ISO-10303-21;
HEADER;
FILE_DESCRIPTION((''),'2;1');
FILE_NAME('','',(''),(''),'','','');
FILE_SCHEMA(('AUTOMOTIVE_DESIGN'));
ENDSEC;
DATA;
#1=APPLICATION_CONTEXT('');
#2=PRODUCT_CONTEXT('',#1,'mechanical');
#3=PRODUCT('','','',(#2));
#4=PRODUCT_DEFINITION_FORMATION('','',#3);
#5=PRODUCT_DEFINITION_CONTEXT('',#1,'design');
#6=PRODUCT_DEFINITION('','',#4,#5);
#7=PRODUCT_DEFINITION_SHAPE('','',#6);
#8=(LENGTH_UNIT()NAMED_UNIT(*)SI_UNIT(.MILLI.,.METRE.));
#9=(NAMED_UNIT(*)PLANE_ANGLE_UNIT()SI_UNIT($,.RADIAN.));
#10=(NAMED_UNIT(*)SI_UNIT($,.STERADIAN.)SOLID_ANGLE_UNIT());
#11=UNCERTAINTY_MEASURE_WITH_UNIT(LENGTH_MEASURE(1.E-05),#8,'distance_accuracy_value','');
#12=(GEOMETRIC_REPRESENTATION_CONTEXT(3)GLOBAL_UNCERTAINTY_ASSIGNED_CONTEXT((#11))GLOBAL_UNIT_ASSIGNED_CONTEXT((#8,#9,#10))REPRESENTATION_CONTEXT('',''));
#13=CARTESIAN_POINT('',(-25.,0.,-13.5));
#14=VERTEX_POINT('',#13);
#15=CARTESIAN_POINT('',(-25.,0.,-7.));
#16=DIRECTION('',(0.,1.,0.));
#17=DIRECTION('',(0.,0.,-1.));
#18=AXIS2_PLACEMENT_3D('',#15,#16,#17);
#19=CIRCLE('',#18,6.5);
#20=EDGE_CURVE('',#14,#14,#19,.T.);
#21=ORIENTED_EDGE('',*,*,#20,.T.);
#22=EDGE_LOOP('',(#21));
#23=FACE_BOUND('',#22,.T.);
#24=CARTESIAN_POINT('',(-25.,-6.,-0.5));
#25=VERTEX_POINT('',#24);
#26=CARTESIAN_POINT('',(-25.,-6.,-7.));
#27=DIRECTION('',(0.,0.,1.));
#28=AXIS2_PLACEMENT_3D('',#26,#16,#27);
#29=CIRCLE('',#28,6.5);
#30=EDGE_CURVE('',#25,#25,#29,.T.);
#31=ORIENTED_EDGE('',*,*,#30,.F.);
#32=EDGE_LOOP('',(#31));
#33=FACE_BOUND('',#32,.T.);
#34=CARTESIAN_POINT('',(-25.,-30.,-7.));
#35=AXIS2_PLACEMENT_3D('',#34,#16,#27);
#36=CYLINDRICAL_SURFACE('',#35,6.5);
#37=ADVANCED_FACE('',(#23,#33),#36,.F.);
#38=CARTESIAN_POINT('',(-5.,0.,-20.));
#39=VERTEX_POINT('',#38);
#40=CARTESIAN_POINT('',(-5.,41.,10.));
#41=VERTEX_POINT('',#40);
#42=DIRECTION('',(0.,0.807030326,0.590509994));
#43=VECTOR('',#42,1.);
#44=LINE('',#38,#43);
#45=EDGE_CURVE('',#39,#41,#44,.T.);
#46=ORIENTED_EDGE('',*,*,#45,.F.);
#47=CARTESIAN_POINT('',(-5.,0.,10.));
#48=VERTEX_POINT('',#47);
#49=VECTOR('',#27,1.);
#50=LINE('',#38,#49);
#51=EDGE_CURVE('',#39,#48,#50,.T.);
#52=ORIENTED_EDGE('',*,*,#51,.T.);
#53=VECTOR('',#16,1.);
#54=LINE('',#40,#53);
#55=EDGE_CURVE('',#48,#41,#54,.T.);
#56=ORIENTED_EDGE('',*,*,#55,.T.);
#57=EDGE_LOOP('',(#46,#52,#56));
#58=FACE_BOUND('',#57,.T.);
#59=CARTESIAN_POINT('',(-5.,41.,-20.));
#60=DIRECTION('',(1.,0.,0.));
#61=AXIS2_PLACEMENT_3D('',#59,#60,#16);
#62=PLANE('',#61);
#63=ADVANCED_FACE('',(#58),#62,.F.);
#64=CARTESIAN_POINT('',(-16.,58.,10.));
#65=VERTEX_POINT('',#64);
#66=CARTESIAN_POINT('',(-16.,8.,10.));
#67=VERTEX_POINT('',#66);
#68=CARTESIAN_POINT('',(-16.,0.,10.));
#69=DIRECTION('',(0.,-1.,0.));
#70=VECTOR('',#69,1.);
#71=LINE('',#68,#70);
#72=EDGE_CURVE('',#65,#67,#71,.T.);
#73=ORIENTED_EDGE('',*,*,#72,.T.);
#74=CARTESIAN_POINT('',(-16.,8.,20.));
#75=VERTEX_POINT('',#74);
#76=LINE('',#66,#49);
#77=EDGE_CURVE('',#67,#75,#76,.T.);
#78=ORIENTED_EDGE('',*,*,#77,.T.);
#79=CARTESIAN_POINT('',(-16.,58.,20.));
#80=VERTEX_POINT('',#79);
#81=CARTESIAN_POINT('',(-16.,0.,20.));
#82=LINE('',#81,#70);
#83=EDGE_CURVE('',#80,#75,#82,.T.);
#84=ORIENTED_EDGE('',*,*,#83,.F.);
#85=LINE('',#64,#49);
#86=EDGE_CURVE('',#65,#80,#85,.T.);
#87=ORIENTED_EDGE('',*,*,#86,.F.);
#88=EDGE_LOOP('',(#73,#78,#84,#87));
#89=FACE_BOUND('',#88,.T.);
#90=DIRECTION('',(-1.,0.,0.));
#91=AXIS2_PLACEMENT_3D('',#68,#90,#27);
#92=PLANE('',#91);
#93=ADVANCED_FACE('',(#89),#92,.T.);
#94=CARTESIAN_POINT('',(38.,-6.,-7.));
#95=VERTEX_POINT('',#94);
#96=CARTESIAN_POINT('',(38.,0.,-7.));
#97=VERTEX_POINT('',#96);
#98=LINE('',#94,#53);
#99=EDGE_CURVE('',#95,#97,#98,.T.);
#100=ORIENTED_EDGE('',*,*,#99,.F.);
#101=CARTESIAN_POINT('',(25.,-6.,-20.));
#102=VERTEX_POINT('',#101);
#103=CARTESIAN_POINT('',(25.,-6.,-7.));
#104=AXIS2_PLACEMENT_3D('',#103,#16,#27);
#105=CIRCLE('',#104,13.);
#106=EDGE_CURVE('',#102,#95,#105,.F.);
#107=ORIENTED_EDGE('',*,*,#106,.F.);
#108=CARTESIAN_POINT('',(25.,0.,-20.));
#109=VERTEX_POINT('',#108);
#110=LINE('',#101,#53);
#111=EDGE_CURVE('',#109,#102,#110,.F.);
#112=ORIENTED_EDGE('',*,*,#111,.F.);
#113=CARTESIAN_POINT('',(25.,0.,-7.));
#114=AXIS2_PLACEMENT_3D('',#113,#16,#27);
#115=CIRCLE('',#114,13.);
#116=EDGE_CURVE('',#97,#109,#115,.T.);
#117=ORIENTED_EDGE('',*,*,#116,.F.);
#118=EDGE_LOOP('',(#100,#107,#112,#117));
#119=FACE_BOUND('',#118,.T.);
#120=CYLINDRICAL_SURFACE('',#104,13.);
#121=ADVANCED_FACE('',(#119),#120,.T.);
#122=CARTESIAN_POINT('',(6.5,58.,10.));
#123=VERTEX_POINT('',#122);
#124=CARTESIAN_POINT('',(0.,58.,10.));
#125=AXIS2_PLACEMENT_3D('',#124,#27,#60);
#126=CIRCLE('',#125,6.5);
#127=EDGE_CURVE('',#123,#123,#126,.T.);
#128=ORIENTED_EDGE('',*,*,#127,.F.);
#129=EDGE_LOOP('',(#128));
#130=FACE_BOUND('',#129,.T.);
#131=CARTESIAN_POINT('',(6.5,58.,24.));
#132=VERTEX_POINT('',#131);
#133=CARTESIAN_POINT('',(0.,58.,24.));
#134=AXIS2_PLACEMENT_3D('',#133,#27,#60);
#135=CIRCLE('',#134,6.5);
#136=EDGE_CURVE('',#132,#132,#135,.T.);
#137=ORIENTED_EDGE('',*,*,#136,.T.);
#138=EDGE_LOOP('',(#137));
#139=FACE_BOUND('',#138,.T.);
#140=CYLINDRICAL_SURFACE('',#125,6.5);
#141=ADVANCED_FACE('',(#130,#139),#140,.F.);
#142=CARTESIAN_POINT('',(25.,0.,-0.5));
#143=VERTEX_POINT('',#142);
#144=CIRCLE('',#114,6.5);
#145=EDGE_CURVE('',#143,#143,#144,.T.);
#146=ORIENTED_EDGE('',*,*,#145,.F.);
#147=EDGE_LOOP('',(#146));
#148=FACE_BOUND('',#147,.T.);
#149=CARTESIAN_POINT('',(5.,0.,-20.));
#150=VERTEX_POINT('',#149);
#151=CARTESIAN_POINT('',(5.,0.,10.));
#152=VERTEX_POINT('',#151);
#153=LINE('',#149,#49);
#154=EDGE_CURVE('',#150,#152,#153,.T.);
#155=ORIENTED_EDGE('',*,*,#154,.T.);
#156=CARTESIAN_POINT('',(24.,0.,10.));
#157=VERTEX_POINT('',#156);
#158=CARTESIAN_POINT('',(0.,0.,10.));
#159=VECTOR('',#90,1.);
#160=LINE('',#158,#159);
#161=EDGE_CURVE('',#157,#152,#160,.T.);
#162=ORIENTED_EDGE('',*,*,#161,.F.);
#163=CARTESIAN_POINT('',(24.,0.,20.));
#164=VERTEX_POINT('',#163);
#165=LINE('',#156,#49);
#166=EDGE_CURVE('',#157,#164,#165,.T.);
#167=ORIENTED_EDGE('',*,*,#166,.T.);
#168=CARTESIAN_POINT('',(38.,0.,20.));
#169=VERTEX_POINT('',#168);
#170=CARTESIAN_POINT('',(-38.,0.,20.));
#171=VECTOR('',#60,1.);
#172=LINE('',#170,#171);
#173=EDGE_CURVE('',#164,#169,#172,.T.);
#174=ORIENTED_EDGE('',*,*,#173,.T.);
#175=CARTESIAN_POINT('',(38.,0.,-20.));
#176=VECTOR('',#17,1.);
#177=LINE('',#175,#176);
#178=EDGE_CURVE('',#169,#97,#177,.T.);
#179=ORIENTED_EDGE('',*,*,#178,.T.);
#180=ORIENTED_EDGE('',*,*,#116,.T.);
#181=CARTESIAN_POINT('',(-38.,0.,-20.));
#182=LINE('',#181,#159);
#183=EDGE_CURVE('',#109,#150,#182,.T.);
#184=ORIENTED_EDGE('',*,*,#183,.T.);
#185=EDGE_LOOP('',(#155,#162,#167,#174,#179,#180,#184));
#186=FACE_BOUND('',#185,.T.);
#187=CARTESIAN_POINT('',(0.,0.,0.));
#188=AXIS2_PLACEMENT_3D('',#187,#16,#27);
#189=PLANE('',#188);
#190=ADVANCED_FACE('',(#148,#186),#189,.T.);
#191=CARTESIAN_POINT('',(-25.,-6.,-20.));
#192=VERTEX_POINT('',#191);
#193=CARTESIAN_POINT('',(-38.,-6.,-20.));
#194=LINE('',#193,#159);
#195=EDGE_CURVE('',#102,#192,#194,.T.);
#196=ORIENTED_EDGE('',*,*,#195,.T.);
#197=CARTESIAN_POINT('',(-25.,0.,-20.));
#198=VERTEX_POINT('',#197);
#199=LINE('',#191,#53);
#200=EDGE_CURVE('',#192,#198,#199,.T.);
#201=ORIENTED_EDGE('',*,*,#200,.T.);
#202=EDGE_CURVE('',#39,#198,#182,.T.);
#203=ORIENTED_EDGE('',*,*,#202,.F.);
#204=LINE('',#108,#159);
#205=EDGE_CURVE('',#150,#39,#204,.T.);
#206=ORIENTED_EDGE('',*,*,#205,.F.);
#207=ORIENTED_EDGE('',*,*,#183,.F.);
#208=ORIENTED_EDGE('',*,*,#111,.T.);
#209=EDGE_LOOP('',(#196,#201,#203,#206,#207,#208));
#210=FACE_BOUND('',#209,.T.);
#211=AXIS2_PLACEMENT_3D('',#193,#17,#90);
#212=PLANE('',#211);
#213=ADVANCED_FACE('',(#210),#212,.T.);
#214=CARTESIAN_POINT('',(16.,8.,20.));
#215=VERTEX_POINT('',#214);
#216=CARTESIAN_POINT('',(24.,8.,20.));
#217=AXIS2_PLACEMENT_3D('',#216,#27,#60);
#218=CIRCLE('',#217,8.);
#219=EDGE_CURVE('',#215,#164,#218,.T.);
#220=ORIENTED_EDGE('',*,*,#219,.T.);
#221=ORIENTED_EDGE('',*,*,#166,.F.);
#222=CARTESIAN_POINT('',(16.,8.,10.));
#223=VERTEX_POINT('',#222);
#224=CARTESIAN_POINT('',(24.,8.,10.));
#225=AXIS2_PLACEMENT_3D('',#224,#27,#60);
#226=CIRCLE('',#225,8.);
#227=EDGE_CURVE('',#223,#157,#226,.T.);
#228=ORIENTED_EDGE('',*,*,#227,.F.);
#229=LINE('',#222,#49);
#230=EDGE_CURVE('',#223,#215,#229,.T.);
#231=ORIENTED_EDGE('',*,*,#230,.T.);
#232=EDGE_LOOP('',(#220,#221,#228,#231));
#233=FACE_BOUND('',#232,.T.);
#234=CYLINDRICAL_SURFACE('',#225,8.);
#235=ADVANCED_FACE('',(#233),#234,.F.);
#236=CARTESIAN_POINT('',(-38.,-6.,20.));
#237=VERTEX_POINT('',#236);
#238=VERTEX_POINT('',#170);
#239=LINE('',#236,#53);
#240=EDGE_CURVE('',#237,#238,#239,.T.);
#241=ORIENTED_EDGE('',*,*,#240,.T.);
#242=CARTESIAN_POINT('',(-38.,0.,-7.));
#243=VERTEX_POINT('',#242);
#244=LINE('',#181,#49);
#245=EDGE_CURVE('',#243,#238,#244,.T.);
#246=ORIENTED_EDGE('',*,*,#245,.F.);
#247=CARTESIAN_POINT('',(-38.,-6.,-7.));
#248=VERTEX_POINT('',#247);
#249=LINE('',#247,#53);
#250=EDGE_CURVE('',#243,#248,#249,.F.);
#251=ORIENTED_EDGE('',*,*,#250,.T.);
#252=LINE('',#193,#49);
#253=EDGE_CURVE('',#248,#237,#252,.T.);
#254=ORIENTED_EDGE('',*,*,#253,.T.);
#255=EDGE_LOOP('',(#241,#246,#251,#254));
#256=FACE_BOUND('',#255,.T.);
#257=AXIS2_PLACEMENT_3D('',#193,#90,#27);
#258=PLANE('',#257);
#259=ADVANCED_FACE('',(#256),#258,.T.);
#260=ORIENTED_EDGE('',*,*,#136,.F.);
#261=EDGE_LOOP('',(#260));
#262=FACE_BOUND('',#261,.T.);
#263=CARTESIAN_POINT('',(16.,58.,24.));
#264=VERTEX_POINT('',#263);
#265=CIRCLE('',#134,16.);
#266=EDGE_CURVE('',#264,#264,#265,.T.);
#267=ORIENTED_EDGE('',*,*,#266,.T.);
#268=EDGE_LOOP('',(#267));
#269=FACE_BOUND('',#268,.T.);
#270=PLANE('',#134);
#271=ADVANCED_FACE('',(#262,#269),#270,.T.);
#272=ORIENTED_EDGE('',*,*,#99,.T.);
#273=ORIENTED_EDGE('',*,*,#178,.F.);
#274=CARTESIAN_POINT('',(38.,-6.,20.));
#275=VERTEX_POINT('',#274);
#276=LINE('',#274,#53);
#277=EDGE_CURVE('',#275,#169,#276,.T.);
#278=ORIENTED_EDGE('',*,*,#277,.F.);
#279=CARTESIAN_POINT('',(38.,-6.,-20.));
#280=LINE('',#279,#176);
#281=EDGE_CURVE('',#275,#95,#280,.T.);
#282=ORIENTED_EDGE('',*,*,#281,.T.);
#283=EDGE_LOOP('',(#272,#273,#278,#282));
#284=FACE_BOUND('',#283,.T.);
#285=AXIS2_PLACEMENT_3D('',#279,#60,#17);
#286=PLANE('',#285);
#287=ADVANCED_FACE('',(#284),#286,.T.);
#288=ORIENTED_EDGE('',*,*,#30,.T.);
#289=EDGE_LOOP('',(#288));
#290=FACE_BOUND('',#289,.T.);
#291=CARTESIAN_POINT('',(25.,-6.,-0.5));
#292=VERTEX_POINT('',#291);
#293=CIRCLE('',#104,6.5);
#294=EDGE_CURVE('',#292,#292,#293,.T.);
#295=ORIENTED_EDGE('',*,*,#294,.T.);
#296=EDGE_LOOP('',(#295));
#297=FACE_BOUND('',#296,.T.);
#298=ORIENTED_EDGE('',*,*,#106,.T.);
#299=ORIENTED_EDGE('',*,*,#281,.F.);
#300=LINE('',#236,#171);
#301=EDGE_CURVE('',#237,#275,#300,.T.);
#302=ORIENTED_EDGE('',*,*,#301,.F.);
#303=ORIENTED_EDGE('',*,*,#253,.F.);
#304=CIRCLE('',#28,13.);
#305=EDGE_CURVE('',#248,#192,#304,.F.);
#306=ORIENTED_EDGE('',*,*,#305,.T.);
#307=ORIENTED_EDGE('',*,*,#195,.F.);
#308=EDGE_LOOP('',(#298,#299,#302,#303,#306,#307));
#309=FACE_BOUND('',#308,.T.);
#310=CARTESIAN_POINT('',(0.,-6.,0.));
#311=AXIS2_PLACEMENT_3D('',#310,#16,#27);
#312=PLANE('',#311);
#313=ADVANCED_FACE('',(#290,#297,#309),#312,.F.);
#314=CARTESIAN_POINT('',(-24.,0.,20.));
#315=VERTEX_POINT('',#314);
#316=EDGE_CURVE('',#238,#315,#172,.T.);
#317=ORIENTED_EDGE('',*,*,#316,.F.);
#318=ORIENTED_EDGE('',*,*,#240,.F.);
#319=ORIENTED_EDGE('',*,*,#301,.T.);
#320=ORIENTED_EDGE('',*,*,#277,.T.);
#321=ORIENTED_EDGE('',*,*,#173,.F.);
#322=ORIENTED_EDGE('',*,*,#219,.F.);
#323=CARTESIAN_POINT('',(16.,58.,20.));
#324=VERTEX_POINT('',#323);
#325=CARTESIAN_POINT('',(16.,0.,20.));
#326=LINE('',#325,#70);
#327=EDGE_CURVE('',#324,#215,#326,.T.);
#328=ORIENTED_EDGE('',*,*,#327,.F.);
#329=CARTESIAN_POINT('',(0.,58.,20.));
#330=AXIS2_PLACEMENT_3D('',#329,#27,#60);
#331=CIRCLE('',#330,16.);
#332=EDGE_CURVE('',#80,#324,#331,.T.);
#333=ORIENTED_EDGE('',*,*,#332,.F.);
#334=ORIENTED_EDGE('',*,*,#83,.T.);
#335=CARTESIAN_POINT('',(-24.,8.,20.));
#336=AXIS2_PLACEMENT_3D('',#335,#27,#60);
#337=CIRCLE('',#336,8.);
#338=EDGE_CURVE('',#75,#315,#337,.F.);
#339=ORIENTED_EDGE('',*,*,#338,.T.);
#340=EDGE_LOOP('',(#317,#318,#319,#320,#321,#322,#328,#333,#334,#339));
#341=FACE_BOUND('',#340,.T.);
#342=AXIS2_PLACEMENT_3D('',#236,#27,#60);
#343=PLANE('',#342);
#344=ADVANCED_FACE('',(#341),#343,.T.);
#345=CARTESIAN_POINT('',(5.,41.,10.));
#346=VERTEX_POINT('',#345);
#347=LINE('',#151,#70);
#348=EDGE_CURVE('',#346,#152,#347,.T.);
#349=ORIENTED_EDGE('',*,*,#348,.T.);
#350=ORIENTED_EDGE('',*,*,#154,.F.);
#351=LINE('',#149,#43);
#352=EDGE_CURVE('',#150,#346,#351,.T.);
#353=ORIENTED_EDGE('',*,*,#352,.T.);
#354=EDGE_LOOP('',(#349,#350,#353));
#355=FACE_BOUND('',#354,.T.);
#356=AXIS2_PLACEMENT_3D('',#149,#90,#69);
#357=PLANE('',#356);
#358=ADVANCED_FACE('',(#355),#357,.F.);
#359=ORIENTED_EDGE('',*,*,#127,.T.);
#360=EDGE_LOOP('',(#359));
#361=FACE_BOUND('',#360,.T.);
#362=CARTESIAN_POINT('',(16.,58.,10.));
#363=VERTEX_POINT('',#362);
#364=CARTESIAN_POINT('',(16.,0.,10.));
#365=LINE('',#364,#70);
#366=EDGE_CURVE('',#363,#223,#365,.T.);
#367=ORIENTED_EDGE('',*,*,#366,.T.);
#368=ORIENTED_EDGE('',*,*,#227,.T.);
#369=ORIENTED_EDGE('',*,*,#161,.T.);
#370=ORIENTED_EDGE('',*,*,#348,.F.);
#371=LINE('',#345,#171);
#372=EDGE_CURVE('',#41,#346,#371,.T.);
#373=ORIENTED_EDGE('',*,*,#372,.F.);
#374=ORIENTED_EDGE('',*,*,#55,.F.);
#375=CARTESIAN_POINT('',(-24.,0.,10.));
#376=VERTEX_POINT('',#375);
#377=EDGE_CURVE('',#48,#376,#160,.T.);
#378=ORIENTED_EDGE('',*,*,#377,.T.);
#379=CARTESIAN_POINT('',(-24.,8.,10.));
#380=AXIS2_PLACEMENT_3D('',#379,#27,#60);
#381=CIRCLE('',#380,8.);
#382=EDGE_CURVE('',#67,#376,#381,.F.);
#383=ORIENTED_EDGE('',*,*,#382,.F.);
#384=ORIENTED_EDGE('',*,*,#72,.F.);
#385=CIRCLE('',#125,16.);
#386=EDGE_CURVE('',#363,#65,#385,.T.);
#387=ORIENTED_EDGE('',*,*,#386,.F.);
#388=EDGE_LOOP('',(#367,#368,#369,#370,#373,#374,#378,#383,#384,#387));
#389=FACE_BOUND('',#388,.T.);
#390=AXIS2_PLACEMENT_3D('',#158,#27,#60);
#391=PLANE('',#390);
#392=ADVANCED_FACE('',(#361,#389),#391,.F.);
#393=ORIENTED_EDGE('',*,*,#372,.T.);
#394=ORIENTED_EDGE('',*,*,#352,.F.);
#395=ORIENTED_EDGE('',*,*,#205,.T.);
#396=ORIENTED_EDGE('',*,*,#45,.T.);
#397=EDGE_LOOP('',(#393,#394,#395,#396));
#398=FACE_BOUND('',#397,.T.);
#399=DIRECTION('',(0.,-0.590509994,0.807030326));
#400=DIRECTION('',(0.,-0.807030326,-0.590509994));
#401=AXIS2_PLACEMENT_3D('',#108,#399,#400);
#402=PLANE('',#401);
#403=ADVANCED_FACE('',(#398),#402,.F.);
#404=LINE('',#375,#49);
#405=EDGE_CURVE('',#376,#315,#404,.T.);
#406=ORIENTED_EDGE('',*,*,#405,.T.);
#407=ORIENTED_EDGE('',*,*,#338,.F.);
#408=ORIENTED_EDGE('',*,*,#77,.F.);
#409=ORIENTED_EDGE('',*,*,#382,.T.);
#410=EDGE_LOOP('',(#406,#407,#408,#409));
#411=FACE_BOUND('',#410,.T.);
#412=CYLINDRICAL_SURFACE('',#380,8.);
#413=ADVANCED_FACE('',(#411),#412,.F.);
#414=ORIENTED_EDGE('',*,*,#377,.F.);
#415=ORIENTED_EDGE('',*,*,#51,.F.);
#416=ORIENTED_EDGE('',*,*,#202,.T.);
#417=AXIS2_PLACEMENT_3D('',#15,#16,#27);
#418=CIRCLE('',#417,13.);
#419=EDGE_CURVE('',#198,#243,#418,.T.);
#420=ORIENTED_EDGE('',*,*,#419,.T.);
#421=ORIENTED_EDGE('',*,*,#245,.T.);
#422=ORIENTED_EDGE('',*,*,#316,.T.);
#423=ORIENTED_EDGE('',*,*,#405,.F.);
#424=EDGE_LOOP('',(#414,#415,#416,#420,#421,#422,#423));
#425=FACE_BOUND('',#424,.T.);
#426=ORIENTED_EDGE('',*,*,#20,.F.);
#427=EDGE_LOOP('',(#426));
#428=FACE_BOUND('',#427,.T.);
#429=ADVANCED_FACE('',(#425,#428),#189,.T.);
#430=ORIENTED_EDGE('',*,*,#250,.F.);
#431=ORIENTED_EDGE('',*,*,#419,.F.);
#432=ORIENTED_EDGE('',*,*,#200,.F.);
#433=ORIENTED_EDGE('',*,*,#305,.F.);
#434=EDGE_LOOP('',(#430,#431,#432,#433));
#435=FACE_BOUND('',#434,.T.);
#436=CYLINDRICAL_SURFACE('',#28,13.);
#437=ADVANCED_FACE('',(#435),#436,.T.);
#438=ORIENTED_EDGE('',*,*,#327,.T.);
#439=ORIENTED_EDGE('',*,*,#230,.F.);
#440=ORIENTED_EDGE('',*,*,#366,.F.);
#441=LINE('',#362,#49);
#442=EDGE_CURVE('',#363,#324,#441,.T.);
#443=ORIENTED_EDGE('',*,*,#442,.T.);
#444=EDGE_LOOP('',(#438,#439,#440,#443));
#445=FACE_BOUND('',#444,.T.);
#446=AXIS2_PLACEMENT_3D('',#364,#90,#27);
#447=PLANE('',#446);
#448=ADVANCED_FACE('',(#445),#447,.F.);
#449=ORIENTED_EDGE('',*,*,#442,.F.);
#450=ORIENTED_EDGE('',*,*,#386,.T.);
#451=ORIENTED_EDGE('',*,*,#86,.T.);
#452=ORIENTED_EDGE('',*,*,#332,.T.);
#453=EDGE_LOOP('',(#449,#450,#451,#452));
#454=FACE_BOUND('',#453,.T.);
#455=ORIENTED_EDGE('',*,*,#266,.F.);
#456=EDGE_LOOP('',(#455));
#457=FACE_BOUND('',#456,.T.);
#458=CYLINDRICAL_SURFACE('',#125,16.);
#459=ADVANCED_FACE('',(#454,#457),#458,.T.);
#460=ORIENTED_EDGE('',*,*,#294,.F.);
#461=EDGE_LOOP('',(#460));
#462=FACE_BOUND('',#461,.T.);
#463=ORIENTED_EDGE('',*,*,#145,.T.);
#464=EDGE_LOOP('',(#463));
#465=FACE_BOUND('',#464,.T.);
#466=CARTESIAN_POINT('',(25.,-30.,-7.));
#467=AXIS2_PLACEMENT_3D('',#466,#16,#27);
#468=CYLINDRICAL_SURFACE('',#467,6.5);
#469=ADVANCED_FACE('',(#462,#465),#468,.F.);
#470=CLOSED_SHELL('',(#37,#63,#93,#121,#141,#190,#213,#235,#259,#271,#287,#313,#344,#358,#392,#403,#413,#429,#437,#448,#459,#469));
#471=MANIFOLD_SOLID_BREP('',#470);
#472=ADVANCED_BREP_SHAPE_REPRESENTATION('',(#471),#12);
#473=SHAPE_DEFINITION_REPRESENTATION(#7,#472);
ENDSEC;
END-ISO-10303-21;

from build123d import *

# Parameters (mm, degrees)
SKETCH1_W               = 76
SKETCH1_H               = 40
BOSS_EXTRUDE1_DEPTH     = 6
BOSS_EXTRUDE2_START     = -10
BOSS_EXTRUDE2_OUTLINE_R = 6.5
BOSS_EXTRUDE2_DEPTH     = 10
SKETCH3_R               = 16
SKETCH3_R_2             = 6.5
BOSS_EXTRUDE3_DEPTH     = 4
SKETCH4_W               = 10
SKETCH4_H               = 41
BOSS_EXTRUDE4_DEPTH     = 30
CUT_EXTRUDE1_DEPTH      = 30
FILLET1_R               = 13
SKETCH6_R               = 6.5
CUT_EXTRUDE2_DEPTH      = 30


# Read off the part's stored shape, not the designer's step: Boss-Extrude2
with BuildPart() as part:
    # Sketch1 → Boss-Extrude1 (new body)
    with BuildSketch(Plane(origin=(0, 0, 0), x_dir=(1, 0, 0), z_dir=(0, 1, 0))):
        Rectangle(SKETCH1_W, SKETCH1_H)
    extrude(amount=-BOSS_EXTRUDE1_DEPTH)

    # Boss-Extrude2 outline → Boss-Extrude2 (add)
    with BuildSketch(Plane.XY.offset(20).offset(BOSS_EXTRUDE2_START)):
        with BuildLine():
            ThreePointArc((-16, 8), (-18.343145751, 2.343145751), (-24, 0))
            Line((-24, 0), (24, 0))
            ThreePointArc((24, 0), (18.343145751, 2.343145751), (16, 8))
            Line((16, 8), (16, 58))
            ThreePointArc((16, 58), (0, 74), (-16, 58))
            Line((-16, 58), (-16, 8))
        make_face()
        with Locations((0, 58)):
            Circle(BOSS_EXTRUDE2_OUTLINE_R, mode=Mode.SUBTRACT)
    extrude(amount=BOSS_EXTRUDE2_DEPTH)

    # Sketch3 → Boss-Extrude3 (add)
    with BuildSketch(Plane.XY.offset(20)):
        with Locations((0, 58)):
            Circle(SKETCH3_R)
        with Locations((0, 58)):
            Circle(SKETCH3_R_2, mode=Mode.SUBTRACT)
    extrude(amount=BOSS_EXTRUDE3_DEPTH)

    # Sketch4 → Boss-Extrude4 (add)
    with BuildSketch(Plane(origin=(0, 0, 10), x_dir=(-1, 0, 0), z_dir=(0, 0, -1))):
        with Locations((0, 20.5)):
            Rectangle(SKETCH4_W, SKETCH4_H)
    extrude(amount=BOSS_EXTRUDE4_DEPTH)

    # Sketch5 → Cut-Extrude1 (cut)
    with BuildSketch(Plane.ZY.offset(5)):
        Polygon((-20, 0), (10, 41), (-20, 41), align=None)
    extrude(amount=-CUT_EXTRUDE1_DEPTH, mode=Mode.SUBTRACT)

    # Fillet1
    fillet1_edges = [part.edges().sort_by_distance(p)[0] for p in [
        (-38, -3, -20),
        (38, -3, -20),
    ]]
    fillet(fillet1_edges, radius=FILLET1_R)

    # Sketch6 → Cut-Extrude2 (cut)
    with BuildSketch(Plane(origin=(0, 0, 0), x_dir=(1, 0, 0), z_dir=(0, 1, 0))):
        with Locations(Location((25, 7, 0), (0, 0, 270))):
            Circle(SKETCH6_R)
        with Locations(Location((-25, 7, 0), (0, 0, 270))):
            Circle(SKETCH6_R)
    extrude(amount=-CUT_EXTRUDE2_DEPTH, mode=Mode.SUBTRACT)


solid = part.part
